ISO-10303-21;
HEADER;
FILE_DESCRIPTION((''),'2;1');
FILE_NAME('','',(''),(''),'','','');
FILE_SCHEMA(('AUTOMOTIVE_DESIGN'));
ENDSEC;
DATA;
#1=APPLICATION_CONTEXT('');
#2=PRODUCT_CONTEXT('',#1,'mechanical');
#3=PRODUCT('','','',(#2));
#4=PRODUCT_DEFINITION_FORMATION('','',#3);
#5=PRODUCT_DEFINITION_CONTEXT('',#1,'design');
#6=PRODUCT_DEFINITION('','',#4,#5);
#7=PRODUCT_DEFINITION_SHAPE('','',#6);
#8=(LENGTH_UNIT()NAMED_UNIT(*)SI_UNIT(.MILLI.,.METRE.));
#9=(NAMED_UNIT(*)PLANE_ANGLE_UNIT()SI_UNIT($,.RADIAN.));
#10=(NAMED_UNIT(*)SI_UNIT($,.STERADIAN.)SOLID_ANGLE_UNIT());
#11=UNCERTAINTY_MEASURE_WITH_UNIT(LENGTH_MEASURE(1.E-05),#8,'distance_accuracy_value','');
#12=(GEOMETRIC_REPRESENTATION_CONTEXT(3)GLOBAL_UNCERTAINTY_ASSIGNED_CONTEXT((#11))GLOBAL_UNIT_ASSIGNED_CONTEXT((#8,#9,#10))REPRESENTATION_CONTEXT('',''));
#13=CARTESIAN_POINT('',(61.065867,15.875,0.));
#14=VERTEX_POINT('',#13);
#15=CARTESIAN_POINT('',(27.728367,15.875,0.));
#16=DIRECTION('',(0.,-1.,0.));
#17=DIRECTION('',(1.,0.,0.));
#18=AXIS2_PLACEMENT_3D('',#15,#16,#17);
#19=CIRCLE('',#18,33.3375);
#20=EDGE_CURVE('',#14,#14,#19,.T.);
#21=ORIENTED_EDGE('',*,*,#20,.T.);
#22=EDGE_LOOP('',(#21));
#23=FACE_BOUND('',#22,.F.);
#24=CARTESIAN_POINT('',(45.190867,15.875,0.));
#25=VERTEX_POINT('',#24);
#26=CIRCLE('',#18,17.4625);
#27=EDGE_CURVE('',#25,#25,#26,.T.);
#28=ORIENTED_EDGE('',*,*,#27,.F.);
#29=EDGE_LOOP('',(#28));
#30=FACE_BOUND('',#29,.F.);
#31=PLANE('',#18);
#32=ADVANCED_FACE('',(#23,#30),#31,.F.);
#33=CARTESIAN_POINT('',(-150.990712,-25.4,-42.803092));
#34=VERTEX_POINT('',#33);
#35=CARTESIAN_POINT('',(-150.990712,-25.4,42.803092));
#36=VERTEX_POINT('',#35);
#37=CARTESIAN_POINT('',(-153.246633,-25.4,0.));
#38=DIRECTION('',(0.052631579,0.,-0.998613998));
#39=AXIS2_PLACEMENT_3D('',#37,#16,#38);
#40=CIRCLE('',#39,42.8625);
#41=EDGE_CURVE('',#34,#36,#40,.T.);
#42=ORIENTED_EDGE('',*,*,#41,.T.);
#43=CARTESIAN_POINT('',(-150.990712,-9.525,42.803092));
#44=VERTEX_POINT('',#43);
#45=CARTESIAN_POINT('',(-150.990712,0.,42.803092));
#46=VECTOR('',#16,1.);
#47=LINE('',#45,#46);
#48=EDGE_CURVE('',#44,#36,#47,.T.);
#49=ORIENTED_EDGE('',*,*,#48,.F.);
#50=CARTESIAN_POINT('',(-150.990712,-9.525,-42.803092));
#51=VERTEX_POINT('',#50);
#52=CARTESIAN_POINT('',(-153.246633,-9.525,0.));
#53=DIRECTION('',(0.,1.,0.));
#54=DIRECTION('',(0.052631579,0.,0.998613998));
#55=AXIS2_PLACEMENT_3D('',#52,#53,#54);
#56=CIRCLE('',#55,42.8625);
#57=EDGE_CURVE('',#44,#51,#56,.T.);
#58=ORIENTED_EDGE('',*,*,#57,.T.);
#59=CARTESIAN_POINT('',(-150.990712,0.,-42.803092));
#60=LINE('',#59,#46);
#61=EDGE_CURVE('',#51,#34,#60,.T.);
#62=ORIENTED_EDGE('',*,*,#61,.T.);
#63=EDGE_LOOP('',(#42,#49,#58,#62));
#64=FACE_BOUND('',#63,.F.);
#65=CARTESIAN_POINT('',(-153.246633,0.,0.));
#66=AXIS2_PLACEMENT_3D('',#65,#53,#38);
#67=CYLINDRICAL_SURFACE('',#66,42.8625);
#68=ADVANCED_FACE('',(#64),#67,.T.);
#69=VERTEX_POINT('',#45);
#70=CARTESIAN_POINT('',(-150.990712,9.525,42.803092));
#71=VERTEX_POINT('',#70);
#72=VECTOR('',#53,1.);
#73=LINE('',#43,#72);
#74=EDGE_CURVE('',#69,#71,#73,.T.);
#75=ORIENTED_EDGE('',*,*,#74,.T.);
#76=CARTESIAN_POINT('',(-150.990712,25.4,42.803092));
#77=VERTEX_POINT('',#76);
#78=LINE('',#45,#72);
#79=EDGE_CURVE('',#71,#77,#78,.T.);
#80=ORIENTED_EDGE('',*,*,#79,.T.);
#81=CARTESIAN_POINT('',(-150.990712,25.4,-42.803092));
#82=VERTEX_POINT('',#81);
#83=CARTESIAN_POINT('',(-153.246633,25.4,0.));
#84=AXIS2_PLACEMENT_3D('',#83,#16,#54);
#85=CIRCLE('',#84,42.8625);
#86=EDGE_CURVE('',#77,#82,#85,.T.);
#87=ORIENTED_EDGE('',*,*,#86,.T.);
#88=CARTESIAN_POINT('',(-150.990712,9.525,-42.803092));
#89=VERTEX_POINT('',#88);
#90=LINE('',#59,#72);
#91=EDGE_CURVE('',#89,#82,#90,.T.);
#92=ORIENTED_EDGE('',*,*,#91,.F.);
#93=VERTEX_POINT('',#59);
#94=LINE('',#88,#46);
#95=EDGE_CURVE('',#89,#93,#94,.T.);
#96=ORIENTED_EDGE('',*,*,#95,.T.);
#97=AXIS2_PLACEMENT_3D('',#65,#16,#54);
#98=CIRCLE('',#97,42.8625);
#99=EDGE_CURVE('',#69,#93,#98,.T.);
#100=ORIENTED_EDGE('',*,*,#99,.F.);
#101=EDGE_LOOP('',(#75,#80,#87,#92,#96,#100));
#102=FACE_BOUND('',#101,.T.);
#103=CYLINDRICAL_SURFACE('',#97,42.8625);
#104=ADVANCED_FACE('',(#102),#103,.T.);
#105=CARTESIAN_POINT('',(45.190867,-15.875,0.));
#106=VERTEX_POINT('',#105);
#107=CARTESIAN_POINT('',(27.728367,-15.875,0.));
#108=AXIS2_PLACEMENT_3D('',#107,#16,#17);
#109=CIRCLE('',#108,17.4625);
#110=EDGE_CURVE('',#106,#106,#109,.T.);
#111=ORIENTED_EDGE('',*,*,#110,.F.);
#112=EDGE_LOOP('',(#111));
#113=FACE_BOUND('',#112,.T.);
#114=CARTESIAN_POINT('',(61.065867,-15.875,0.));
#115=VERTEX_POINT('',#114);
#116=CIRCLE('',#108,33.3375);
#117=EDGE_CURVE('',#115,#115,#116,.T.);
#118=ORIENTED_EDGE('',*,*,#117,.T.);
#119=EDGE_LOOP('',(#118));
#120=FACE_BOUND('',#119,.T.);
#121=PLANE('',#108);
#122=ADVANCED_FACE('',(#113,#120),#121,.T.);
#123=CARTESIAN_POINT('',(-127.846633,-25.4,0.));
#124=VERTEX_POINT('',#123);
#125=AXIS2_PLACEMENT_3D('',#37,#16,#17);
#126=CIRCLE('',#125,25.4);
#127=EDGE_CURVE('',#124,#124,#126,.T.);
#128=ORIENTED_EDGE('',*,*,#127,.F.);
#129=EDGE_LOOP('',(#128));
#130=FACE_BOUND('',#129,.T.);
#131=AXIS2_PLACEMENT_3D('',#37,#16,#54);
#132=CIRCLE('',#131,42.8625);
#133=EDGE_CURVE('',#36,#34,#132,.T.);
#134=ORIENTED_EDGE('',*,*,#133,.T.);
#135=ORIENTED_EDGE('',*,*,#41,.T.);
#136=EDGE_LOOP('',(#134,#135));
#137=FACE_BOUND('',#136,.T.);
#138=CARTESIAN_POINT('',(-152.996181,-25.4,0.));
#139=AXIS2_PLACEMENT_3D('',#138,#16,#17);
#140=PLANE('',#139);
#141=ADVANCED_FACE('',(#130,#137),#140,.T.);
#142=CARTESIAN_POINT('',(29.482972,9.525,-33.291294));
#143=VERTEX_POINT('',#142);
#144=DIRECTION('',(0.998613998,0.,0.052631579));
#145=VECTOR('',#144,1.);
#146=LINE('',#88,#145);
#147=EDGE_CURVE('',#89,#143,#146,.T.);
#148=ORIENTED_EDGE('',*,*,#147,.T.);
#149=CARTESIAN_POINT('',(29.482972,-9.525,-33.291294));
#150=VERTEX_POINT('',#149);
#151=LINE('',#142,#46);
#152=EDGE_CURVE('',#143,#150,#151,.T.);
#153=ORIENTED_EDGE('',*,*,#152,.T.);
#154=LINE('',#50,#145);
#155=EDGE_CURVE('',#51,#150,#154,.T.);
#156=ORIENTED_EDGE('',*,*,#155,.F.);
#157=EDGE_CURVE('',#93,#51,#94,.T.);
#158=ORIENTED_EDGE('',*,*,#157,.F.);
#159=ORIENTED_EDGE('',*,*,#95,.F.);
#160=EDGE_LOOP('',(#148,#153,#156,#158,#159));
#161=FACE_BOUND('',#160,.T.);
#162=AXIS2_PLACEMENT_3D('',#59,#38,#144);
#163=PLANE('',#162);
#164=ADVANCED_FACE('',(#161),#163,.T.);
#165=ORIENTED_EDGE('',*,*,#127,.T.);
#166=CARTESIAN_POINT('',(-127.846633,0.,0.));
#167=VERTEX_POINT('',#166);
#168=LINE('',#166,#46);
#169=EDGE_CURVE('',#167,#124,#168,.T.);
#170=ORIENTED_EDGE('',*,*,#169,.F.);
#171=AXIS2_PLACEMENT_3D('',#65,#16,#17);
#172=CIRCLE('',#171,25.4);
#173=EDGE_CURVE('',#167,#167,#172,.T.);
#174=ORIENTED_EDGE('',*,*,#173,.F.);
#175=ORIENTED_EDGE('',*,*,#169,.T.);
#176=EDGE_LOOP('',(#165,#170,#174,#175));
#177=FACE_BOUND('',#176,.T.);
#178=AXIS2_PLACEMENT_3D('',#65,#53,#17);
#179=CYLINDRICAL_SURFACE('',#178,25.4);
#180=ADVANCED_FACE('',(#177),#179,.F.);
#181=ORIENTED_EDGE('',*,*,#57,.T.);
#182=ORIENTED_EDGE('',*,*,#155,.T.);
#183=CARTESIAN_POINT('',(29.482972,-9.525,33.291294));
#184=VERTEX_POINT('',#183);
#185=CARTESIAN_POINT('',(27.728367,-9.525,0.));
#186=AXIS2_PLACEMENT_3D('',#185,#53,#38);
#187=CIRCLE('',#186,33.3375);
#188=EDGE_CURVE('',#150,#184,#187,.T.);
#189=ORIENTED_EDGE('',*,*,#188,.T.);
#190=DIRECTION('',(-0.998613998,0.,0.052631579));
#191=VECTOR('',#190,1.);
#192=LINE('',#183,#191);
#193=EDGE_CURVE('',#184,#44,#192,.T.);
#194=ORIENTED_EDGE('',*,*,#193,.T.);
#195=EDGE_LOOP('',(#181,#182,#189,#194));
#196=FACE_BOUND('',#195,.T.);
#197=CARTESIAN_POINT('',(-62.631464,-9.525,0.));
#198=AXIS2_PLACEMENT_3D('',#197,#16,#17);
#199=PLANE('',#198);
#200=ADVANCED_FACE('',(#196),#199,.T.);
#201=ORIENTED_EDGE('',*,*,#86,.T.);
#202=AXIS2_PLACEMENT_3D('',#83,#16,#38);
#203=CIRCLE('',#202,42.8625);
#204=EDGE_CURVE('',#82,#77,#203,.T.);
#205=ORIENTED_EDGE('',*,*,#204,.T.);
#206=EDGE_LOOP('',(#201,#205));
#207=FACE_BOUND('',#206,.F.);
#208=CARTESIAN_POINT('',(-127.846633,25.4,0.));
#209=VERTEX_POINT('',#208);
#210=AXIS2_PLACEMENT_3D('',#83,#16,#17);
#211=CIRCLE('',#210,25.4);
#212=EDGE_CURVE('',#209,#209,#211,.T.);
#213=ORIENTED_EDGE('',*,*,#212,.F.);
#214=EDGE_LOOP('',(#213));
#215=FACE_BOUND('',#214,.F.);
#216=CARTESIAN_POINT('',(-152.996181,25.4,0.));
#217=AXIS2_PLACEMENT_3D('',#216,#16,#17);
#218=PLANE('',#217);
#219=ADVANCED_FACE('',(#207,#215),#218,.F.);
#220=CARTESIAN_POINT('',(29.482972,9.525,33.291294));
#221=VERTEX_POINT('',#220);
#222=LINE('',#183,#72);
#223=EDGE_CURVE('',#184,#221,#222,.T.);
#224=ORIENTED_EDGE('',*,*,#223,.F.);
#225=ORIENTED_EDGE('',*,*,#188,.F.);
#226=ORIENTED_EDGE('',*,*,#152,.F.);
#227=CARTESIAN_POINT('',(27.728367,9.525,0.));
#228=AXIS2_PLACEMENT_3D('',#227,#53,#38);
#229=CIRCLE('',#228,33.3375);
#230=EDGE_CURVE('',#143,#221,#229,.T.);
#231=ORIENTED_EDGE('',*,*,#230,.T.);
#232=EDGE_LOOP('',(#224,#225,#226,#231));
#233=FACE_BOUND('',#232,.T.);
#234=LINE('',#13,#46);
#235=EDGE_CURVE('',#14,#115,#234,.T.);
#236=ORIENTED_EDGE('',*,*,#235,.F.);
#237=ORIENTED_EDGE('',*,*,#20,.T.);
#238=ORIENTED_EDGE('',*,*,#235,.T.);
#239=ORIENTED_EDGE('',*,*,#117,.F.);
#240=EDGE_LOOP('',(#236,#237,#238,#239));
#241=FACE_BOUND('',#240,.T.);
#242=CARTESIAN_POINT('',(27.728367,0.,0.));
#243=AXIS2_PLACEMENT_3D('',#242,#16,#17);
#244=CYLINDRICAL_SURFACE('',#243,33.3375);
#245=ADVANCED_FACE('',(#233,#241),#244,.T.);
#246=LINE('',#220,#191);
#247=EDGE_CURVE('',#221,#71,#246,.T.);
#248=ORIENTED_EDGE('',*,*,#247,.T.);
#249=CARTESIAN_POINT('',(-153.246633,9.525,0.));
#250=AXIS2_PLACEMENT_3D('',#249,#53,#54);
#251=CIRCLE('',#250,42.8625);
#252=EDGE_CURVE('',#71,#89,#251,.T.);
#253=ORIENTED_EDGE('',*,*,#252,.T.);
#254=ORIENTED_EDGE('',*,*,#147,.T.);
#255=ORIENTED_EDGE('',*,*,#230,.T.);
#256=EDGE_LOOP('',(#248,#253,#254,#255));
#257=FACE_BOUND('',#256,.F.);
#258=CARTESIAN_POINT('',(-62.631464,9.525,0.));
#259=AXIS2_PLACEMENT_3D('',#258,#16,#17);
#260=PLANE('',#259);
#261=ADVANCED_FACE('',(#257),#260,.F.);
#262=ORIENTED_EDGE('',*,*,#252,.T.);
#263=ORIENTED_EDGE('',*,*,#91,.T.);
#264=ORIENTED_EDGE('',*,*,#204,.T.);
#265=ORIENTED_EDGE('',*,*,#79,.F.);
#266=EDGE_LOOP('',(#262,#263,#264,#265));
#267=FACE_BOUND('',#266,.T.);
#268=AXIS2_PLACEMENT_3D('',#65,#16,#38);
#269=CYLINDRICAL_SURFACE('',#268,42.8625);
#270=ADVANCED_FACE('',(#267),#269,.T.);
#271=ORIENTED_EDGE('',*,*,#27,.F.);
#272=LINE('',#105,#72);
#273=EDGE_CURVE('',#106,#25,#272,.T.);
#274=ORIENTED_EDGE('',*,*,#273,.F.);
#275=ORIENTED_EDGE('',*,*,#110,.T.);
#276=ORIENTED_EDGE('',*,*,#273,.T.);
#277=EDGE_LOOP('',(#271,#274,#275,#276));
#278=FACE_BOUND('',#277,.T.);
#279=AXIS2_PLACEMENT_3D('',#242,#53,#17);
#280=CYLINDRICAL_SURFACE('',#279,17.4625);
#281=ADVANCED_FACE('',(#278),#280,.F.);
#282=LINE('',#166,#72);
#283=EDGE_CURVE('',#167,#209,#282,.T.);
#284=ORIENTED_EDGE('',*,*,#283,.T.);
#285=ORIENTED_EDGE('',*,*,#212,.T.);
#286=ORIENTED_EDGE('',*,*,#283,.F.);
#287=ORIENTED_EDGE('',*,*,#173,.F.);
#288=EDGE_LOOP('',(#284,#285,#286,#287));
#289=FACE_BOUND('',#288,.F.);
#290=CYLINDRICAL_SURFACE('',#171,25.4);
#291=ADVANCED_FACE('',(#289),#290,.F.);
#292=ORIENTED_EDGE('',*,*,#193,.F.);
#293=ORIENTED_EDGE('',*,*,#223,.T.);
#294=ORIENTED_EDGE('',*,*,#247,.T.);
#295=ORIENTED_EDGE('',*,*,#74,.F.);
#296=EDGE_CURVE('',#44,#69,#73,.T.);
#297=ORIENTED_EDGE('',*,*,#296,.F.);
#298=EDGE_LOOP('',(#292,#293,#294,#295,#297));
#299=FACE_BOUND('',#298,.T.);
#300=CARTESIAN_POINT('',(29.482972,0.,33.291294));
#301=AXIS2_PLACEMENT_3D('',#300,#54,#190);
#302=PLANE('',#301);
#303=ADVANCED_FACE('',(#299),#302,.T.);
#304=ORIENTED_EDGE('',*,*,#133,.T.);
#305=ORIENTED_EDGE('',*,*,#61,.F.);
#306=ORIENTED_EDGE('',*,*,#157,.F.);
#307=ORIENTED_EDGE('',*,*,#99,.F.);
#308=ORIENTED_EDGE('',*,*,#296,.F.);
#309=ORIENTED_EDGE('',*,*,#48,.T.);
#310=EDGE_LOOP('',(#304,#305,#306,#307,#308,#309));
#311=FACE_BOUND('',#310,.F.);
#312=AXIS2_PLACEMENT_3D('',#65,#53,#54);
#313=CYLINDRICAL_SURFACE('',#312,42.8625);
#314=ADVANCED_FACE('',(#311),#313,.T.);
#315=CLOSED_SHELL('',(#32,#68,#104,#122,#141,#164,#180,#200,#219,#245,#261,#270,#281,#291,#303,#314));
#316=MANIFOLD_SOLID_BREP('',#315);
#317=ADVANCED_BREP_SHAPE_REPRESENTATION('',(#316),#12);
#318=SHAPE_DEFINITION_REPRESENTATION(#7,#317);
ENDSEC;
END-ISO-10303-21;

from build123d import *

# Parameters (mm, degrees)
F1_DEPTH = 9.525
F0_R     = 17.4625
F2_DEPTH = 15.875
F0_R_2   = 25.4
F3_DEPTH = 25.4


with BuildPart() as f1:
    # F0 (on Front) → F1 (new body, symmetric)
    with BuildSketch(Plane.XZ):
        with BuildLine():
            ThreePointArc((-150.9907119117, 42.803092487), (-122.150907194, 29.4999956791), (-110.3841329643, 0))
            ThreePointArc((-110.3841329643, 0), (-122.150907194, -29.4999956791), (-150.9907119117, -42.803092487))
            Line((-150.9907119117, -42.803092487), (29.4829722989, -33.2912941566))
            ThreePointArc((29.4829722989, -33.2912941566), (-5.6091329643, 0), (29.4829722989, 33.2912941566))
            Line((29.4829722989, 33.2912941566), (-150.9907119117, 42.803092487))
        make_face()
    extrude(amount=F1_DEPTH, both=True)

    # F0 (on Front) → F2 (join, symmetric)
    with BuildSketch(Plane.XZ):
        with BuildLine():
            ThreePointArc((61.0658670357, 0), (51.9139315238, 22.9444410837), (29.4829722989, 33.2912941566))
            ThreePointArc((29.4829722989, 33.2912941566), (-5.6091329643, 0), (29.4829722989, -33.2912941566))
            ThreePointArc((29.4829722989, -33.2912941566), (51.9139315238, -22.9444410837), (61.0658670357, 0))
        make_face()
        with Locations((27.7283670357, 0)):
            Circle(F0_R, mode=Mode.SUBTRACT)
    extrude(amount=F2_DEPTH, both=True)

    # F0 (on Front) → F3 (join, symmetric)
    with BuildSketch(Plane.XZ):
        with BuildLine():
            ThreePointArc((-150.9907119117, -42.803092487), (-122.150907194, -29.4999956791), (-110.3841329643, 0))
            ThreePointArc((-110.3841329643, 0), (-122.150907194, 29.4999956791), (-150.9907119117, 42.803092487))
            ThreePointArc((-150.9907119117, 42.803092487), (-196.1091329643, 0), (-150.9907119117, -42.803092487))
        make_face()
        with Locations((-153.2466329643, 0)):
            Circle(F0_R_2, mode=Mode.SUBTRACT)
    extrude(amount=F3_DEPTH, both=True)


solid = f1.part
